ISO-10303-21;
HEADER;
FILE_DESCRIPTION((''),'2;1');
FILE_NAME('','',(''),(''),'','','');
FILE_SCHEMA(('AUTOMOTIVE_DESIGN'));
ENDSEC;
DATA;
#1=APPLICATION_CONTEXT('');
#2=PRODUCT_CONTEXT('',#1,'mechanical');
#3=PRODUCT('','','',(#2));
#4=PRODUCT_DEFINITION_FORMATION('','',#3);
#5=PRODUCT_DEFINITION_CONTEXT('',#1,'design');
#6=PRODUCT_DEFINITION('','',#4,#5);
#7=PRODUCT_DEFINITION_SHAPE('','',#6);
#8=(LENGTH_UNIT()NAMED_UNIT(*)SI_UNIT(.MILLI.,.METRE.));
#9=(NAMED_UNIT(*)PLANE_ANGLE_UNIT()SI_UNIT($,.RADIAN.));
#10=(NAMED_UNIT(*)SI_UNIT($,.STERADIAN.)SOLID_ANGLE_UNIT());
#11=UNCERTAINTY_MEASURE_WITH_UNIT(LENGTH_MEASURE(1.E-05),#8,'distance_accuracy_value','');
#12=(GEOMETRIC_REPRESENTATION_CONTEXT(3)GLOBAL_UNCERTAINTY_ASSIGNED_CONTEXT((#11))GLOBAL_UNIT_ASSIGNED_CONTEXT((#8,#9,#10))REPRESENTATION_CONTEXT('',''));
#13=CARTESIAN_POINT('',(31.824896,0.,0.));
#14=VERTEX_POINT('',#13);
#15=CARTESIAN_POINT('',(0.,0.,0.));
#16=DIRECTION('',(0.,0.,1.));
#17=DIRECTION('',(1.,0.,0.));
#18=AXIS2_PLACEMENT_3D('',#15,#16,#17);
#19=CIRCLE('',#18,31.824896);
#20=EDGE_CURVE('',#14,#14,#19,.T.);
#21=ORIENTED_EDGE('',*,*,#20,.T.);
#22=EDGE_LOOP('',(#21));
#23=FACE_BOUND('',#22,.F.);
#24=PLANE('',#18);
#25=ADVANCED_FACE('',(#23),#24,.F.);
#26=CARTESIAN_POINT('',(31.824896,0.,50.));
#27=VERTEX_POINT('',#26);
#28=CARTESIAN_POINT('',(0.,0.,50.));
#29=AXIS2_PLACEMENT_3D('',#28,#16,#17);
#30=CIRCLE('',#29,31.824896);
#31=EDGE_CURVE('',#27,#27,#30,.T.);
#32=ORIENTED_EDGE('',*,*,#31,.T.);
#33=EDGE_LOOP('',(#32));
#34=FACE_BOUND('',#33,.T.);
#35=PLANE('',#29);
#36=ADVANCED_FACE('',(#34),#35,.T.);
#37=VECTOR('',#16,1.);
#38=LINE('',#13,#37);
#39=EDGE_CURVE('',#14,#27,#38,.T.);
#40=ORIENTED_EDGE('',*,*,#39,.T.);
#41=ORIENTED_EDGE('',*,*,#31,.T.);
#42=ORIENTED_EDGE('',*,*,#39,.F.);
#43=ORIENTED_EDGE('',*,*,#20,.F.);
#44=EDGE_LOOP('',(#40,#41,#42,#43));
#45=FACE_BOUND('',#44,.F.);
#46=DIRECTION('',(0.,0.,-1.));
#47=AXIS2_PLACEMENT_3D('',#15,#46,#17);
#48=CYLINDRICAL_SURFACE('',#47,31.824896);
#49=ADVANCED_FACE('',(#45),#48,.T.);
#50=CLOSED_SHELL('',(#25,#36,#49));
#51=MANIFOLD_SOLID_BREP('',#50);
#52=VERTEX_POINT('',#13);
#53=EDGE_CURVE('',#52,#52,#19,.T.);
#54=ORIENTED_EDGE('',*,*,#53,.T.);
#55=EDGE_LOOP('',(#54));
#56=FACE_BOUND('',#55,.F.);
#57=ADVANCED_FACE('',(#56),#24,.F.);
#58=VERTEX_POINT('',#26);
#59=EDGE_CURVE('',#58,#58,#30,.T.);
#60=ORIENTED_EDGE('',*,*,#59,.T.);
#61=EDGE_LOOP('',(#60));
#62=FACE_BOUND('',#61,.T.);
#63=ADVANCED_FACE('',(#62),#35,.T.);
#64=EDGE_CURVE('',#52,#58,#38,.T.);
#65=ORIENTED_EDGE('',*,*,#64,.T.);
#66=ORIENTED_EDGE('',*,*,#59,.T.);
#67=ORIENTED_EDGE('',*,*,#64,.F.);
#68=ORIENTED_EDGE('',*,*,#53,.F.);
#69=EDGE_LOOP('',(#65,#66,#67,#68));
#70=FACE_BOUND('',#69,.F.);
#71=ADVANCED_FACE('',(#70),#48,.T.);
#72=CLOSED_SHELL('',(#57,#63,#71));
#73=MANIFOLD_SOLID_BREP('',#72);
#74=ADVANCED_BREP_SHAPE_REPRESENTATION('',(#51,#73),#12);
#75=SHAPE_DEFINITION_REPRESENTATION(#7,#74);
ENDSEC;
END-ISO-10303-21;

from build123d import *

# Parameters (mm, degrees)
F0_R     = 31.8248959205
F2_DEPTH = 50
F1_R     = 31.8248959205


# Not quite as in the source:
# - a feature of the source that left no trace in its solid (it failed there, or was rolled back) is left out


with BuildPart() as f2:
    # F0 (on Top) → F2 (new body)
    with BuildSketch(Plane.XY):
        Circle(F0_R)
    extrude(amount=F2_DEPTH)


with BuildPart() as f2b:
    # F1 (on face) → F2, piece 2 (new body)
    with BuildSketch(Plane.XY):
        Circle(F1_R)
    extrude(amount=F2_DEPTH)


solid = Compound([f2.part, f2b.part])
